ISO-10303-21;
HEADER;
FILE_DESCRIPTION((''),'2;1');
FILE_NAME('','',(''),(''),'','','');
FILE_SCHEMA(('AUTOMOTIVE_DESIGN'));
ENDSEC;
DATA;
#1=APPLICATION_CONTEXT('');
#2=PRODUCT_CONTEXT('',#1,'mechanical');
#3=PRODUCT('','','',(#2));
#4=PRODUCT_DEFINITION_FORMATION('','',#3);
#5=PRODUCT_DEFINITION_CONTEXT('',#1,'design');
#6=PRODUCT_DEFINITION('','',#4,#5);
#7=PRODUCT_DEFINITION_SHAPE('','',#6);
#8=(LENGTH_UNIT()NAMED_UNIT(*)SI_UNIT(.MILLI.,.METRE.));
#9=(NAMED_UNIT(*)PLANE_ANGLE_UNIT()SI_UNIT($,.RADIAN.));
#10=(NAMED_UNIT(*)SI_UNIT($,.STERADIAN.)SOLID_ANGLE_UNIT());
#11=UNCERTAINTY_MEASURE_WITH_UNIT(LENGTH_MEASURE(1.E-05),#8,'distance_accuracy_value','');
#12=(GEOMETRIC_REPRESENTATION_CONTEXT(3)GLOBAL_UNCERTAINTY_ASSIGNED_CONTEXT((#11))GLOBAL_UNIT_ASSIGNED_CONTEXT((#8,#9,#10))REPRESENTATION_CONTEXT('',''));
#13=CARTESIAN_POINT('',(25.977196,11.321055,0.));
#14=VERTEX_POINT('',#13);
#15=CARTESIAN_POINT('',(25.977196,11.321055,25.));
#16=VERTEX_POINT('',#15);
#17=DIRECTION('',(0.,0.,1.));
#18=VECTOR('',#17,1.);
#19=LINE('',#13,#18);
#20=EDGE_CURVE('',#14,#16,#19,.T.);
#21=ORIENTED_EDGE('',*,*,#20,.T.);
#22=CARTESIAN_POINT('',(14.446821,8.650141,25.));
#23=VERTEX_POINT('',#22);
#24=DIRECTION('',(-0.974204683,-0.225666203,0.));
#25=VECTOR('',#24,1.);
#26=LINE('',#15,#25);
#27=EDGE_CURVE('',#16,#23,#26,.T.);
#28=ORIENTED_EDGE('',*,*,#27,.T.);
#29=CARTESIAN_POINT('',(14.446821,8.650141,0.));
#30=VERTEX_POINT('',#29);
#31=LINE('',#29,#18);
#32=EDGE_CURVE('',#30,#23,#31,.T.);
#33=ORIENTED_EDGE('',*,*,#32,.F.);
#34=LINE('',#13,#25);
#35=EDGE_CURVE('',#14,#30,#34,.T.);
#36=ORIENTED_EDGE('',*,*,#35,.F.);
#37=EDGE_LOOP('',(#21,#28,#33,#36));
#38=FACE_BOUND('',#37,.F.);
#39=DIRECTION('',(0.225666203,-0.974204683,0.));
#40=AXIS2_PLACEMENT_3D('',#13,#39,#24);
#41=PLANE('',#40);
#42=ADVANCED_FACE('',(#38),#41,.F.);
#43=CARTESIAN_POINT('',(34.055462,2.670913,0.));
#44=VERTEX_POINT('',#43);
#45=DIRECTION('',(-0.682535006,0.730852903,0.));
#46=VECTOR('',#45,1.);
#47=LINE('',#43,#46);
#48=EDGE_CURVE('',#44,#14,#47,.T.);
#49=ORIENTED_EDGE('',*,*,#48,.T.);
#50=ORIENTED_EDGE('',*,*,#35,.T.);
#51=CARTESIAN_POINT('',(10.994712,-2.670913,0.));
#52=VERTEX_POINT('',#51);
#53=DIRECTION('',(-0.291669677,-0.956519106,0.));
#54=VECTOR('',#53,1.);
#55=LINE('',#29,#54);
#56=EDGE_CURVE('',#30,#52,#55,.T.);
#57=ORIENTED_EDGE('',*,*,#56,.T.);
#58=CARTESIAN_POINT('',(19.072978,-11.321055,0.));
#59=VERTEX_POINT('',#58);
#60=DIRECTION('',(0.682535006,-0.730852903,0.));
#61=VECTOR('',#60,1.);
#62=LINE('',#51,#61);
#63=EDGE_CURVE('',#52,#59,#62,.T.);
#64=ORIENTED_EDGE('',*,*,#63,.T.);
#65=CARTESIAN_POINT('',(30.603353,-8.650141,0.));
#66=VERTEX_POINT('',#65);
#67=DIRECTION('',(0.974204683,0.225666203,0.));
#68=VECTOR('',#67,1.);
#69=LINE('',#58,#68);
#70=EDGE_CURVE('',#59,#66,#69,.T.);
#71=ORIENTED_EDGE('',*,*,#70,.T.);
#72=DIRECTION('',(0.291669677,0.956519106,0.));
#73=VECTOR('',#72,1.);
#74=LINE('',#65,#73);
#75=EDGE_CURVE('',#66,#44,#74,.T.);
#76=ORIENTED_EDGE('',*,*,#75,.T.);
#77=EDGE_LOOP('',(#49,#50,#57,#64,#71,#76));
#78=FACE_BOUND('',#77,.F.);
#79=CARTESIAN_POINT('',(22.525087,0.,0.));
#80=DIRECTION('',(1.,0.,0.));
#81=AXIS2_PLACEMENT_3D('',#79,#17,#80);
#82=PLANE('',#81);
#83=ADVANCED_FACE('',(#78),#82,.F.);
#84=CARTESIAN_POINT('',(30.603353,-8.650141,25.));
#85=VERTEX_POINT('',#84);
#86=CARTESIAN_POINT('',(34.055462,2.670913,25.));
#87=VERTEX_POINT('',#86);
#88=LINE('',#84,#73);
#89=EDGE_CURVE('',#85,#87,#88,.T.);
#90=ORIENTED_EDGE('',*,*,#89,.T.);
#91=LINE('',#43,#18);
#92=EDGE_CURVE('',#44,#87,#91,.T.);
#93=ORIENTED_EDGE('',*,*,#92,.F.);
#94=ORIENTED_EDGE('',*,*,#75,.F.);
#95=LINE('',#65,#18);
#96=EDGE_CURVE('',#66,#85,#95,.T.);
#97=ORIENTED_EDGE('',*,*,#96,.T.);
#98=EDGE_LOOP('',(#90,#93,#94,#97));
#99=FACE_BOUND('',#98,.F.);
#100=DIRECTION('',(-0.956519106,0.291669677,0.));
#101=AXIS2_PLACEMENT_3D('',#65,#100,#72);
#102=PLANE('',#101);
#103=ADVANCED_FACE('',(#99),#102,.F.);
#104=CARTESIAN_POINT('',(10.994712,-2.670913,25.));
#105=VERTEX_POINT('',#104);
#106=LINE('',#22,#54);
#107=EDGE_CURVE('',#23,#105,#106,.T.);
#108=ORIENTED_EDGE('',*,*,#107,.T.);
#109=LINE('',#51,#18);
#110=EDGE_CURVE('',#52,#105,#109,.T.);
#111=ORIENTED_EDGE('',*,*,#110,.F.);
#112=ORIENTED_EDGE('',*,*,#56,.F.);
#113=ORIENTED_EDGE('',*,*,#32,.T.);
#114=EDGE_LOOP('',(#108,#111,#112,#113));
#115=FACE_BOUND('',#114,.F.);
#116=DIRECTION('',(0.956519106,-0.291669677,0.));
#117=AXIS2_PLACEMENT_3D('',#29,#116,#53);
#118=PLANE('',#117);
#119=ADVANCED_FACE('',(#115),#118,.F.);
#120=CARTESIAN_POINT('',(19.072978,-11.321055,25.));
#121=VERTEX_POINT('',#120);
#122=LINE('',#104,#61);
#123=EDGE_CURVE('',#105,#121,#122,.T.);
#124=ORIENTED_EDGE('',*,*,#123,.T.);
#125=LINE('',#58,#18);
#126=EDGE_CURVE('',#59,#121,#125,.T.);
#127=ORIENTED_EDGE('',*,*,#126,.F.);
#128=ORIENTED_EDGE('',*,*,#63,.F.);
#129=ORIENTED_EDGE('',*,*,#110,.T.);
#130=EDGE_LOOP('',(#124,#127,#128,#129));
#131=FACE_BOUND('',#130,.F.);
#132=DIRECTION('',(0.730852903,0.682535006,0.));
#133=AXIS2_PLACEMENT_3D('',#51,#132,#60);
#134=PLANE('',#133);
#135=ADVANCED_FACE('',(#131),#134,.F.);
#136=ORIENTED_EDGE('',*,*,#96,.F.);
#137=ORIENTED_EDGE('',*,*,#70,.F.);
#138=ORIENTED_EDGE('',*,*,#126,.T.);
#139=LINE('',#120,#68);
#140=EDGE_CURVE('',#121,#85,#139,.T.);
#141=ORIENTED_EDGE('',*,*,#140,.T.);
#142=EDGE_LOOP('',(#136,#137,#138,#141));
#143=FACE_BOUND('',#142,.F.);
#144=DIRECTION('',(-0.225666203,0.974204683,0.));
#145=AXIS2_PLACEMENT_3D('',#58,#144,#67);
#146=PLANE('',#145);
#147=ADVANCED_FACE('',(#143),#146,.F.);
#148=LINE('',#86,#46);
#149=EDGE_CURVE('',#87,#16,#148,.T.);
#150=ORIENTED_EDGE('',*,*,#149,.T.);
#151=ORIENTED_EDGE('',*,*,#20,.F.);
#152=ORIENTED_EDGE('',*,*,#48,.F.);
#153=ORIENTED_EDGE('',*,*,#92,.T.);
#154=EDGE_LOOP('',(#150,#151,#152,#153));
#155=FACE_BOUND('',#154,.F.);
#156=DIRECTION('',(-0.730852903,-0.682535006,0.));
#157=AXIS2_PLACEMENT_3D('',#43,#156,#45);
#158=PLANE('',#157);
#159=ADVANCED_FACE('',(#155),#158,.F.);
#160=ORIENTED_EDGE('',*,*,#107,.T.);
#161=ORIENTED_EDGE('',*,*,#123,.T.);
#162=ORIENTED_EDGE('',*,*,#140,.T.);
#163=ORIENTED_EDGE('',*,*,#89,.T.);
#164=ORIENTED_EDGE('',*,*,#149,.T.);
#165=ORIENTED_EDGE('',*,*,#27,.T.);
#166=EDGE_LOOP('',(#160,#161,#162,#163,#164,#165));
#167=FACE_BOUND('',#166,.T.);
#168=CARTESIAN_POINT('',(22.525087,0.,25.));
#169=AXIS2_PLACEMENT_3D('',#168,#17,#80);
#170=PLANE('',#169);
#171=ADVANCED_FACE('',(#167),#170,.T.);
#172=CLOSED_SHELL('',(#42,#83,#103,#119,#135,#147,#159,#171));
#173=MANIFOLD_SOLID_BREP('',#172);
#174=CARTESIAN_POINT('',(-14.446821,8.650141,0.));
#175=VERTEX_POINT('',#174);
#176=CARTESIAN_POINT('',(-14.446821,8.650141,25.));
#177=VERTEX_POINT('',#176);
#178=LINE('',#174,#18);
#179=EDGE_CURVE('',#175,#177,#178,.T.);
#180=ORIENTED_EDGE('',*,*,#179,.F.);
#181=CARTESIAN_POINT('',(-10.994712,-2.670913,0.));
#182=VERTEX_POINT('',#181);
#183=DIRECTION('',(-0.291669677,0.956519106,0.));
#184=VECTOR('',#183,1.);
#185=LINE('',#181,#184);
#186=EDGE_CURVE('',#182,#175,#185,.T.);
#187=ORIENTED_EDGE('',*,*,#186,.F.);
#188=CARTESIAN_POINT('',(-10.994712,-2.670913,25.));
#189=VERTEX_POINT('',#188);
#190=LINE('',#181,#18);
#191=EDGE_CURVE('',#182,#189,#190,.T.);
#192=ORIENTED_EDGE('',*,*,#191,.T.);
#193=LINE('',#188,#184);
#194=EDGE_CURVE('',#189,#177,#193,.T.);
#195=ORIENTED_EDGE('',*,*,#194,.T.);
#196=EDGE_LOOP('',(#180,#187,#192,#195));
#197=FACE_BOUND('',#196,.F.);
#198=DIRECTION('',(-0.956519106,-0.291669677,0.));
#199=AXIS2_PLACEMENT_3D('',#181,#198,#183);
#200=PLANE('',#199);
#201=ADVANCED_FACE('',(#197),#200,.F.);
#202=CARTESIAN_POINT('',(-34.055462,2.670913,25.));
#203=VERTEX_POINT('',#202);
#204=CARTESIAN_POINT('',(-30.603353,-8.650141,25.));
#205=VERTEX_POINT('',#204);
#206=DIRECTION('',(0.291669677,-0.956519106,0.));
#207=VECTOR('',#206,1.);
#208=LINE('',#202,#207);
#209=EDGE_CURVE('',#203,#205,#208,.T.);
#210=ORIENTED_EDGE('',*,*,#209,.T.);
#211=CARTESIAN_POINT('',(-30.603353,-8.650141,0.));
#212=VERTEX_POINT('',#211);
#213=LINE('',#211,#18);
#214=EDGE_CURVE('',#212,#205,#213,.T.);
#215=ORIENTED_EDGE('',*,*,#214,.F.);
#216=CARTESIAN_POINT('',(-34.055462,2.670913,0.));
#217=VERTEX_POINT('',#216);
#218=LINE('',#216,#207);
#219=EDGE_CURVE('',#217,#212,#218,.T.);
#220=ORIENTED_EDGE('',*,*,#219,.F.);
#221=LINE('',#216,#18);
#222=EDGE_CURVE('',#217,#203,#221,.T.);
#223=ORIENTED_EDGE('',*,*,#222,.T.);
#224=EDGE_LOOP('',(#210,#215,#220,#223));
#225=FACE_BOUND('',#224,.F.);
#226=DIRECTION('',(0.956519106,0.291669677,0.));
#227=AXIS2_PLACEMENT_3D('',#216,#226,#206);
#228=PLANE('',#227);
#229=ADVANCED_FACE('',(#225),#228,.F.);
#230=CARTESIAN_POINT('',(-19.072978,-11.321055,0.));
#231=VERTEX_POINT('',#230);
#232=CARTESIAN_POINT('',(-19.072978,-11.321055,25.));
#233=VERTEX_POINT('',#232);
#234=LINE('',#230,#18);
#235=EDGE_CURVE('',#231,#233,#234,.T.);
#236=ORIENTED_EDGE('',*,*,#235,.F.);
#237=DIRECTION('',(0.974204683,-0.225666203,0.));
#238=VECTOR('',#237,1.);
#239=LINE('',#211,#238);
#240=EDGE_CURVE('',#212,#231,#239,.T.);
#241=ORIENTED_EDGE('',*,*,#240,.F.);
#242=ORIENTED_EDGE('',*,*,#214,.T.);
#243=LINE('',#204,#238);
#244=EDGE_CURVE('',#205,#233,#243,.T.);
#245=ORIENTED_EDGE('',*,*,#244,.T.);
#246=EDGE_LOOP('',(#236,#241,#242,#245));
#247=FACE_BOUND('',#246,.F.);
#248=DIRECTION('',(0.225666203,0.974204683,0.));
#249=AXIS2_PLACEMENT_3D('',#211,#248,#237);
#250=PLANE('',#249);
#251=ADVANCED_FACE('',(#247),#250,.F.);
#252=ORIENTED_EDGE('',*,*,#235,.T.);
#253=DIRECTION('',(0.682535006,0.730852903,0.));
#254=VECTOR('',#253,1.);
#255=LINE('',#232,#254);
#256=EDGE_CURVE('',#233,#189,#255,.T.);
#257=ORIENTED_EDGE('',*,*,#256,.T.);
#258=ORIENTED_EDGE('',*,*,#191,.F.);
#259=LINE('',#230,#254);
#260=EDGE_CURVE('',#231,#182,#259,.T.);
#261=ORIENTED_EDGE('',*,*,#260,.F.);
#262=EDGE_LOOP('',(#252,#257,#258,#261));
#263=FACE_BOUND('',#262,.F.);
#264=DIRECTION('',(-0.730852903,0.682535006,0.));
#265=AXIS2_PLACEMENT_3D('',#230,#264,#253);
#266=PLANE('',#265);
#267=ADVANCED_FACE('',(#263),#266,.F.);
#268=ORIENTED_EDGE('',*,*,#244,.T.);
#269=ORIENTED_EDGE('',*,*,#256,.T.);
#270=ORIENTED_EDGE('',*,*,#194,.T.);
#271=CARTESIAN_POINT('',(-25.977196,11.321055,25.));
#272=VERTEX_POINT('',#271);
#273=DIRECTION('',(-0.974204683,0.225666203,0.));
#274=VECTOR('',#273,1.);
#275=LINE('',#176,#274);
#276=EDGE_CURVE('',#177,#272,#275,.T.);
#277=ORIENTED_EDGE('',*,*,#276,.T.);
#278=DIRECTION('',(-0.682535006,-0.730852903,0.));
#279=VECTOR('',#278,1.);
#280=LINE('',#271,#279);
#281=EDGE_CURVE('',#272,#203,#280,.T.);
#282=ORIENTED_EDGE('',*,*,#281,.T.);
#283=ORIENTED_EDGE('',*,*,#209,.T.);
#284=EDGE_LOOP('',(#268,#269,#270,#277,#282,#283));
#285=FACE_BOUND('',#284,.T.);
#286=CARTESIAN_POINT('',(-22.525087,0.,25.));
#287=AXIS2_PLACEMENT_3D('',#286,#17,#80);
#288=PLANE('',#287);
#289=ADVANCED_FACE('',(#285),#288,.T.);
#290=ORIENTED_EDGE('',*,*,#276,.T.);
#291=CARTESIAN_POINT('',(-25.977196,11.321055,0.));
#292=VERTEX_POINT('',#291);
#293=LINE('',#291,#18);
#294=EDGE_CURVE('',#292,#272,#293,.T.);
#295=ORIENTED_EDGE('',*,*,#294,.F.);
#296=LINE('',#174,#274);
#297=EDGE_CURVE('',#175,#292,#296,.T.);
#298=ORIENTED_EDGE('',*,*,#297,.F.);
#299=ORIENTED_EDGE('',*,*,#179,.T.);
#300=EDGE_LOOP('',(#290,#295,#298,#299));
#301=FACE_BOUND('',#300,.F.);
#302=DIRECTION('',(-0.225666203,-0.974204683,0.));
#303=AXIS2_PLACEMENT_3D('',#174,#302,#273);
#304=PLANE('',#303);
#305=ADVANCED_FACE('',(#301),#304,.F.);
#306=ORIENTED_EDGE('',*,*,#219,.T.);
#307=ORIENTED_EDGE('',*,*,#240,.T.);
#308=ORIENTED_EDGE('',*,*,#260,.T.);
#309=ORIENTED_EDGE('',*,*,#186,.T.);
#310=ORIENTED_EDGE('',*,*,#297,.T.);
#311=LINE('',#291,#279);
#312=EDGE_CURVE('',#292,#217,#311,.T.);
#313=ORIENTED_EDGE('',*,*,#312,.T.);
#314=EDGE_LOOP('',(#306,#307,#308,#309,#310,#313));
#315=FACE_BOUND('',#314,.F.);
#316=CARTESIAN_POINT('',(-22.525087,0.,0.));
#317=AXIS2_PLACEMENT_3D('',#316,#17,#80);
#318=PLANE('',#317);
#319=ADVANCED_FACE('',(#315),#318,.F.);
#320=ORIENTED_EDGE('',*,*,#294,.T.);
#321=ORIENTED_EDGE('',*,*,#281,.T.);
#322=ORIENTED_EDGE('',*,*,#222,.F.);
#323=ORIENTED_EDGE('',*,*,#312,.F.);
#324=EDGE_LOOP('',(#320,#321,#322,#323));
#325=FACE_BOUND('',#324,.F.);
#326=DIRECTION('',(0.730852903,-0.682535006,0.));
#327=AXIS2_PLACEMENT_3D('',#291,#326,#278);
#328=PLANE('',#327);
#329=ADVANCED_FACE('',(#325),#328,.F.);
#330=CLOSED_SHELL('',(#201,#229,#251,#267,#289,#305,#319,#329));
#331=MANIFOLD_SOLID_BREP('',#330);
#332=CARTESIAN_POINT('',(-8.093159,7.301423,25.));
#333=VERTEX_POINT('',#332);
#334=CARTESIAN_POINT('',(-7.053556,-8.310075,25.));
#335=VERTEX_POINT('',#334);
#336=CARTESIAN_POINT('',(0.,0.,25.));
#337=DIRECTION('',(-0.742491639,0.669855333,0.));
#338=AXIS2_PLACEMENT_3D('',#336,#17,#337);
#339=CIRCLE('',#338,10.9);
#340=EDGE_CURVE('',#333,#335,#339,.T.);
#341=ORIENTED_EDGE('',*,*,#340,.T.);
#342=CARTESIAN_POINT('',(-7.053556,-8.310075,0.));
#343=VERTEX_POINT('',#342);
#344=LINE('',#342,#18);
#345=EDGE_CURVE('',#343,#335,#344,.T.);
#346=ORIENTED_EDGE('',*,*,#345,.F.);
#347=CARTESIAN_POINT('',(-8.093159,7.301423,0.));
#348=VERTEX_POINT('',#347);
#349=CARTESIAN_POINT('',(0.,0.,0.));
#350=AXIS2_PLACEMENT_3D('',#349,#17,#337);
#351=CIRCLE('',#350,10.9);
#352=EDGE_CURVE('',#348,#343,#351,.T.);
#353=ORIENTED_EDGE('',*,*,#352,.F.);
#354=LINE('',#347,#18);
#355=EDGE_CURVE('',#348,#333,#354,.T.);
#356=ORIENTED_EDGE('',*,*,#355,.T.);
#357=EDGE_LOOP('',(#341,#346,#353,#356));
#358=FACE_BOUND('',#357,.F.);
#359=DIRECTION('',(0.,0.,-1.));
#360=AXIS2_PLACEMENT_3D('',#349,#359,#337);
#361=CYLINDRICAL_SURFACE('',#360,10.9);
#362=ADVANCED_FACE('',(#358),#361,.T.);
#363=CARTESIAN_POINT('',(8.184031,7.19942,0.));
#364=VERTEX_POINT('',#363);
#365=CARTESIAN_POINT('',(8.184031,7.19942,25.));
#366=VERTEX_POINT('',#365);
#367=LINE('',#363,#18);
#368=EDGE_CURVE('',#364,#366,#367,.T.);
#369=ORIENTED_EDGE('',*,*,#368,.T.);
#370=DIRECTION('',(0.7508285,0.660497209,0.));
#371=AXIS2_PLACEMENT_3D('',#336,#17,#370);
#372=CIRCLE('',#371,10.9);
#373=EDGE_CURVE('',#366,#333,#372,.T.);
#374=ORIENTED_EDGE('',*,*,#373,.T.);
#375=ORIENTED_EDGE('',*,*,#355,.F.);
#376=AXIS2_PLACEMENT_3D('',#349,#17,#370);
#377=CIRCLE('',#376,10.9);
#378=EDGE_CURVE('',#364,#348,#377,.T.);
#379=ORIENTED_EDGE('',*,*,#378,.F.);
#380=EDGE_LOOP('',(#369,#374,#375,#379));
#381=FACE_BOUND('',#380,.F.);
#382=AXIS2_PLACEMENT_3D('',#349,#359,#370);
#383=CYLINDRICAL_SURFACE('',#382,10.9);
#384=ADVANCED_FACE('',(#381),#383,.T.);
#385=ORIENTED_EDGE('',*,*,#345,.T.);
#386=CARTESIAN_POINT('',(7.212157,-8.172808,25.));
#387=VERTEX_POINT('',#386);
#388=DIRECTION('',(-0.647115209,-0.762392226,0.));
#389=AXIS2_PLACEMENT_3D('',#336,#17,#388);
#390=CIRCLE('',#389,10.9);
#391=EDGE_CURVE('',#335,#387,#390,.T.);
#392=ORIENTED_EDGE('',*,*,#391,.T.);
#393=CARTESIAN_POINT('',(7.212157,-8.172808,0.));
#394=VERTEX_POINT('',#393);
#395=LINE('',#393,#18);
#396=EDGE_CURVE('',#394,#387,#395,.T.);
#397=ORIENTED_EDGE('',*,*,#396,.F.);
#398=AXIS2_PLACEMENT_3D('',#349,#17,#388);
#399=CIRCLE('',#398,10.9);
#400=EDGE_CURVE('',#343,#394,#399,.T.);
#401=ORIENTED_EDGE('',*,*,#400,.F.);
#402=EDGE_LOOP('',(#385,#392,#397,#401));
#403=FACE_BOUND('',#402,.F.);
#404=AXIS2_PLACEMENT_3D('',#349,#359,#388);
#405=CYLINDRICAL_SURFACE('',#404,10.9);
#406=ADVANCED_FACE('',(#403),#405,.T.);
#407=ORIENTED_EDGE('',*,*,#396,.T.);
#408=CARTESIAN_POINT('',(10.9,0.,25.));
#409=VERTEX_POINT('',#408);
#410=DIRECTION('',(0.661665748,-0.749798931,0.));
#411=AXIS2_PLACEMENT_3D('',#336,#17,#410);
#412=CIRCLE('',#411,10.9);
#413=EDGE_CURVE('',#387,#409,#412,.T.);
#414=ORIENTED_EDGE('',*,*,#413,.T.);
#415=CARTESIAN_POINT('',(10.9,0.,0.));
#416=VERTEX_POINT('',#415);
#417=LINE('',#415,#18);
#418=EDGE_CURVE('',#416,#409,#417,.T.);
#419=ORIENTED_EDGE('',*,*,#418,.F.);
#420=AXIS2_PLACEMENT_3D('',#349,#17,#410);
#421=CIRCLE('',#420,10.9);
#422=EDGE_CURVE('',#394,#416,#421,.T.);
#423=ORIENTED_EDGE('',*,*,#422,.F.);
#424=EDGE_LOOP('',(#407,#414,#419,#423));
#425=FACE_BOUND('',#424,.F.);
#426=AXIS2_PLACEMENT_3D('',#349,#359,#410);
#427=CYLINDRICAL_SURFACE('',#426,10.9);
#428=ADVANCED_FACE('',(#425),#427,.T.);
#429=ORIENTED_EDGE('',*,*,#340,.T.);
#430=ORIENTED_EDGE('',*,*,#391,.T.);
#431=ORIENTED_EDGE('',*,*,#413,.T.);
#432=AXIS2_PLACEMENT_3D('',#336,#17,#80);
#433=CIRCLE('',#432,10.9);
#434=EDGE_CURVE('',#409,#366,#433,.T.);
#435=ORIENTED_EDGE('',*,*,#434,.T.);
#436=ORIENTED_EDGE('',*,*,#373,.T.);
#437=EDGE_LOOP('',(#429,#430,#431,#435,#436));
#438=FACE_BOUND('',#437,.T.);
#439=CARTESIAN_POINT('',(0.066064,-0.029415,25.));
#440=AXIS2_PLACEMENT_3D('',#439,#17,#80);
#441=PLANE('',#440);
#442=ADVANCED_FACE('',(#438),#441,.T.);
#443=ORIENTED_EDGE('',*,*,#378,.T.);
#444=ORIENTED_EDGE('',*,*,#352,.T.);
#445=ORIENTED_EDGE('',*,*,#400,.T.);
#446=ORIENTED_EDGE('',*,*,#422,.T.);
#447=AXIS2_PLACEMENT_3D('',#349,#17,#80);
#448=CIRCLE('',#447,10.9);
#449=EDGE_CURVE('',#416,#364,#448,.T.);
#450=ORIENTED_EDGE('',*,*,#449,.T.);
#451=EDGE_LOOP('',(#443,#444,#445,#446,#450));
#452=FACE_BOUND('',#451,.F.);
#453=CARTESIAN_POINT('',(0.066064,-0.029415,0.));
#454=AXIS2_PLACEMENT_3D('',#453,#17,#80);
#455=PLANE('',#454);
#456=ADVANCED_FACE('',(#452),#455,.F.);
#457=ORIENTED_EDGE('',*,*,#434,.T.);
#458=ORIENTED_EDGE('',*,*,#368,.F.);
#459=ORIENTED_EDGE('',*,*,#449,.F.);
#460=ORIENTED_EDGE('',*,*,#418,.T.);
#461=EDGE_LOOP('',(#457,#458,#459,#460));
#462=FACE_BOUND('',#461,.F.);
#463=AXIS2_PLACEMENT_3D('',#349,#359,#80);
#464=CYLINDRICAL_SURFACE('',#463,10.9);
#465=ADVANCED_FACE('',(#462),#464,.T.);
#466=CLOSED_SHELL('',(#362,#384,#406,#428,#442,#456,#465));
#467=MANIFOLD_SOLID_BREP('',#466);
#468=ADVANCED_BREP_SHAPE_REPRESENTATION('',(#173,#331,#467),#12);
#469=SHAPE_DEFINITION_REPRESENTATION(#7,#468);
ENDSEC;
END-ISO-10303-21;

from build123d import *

# Parameters (mm, degrees)
F1_DEPTH = 25


# Not quite as in the source:
# - a feature of the source that left no trace in its solid (it failed there, or was rolled back) is left out


with BuildPart() as f1:
    # F0 (on Top) → F1 (new body)
    with BuildSketch(Plane.XY):
        Polygon((-10.9947116086, -2.6709130821), (-14.4468207234, 8.6501414622), (-25.9771961137, 11.3210545442), (-34.0554623892, 2.6709130821), (-30.6033532745, -8.6501414622), (-19.0729778841, -11.3210545442), align=None)
    extrude(amount=F1_DEPTH)


with BuildPart() as f1b:
    # F0 (on Top) → F1, piece 2 (new body)
    with BuildSketch(Plane.XY):
        Polygon((25.9771961137, 11.3210545442), (14.4468207234, 8.6501414622), (10.9947116086, -2.6709130821), (19.0729778841, -11.3210545442), (30.6033532745, -8.6501414622), (34.0554623892, 2.6709130821), align=None)
    extrude(amount=F1_DEPTH)


with BuildPart() as f1c:
    # F0 (on Top) → F1, piece 3 (new body)
    with BuildSketch(Plane.XY):
        with BuildLine():
            ThreePointArc((7.2121566552, -8.1728083534), (9.9353537315, -4.4831625254), (10.9, 0))
            ThreePointArc((10.9, 0), (10.1984296374, 3.847341021), (8.1840306547, 7.1994195768))
            ThreePointArc((8.1840306547, 7.1994195768), (0.0683052099, 10.8997859795), (-8.0931588609, 7.3014231252))
            ThreePointArc((-8.0931588609, 7.3014231252), (-10.8759119881, -0.724250251), (-7.0535557785, -8.3100752632))
            ThreePointArc((-7.0535557785, -8.3100752632), (0.104876645, -10.899495442), (7.2121566552, -8.1728083534))
        make_face()
    extrude(amount=F1_DEPTH)


solid = Compound([f1.part, f1b.part, f1c.part])
